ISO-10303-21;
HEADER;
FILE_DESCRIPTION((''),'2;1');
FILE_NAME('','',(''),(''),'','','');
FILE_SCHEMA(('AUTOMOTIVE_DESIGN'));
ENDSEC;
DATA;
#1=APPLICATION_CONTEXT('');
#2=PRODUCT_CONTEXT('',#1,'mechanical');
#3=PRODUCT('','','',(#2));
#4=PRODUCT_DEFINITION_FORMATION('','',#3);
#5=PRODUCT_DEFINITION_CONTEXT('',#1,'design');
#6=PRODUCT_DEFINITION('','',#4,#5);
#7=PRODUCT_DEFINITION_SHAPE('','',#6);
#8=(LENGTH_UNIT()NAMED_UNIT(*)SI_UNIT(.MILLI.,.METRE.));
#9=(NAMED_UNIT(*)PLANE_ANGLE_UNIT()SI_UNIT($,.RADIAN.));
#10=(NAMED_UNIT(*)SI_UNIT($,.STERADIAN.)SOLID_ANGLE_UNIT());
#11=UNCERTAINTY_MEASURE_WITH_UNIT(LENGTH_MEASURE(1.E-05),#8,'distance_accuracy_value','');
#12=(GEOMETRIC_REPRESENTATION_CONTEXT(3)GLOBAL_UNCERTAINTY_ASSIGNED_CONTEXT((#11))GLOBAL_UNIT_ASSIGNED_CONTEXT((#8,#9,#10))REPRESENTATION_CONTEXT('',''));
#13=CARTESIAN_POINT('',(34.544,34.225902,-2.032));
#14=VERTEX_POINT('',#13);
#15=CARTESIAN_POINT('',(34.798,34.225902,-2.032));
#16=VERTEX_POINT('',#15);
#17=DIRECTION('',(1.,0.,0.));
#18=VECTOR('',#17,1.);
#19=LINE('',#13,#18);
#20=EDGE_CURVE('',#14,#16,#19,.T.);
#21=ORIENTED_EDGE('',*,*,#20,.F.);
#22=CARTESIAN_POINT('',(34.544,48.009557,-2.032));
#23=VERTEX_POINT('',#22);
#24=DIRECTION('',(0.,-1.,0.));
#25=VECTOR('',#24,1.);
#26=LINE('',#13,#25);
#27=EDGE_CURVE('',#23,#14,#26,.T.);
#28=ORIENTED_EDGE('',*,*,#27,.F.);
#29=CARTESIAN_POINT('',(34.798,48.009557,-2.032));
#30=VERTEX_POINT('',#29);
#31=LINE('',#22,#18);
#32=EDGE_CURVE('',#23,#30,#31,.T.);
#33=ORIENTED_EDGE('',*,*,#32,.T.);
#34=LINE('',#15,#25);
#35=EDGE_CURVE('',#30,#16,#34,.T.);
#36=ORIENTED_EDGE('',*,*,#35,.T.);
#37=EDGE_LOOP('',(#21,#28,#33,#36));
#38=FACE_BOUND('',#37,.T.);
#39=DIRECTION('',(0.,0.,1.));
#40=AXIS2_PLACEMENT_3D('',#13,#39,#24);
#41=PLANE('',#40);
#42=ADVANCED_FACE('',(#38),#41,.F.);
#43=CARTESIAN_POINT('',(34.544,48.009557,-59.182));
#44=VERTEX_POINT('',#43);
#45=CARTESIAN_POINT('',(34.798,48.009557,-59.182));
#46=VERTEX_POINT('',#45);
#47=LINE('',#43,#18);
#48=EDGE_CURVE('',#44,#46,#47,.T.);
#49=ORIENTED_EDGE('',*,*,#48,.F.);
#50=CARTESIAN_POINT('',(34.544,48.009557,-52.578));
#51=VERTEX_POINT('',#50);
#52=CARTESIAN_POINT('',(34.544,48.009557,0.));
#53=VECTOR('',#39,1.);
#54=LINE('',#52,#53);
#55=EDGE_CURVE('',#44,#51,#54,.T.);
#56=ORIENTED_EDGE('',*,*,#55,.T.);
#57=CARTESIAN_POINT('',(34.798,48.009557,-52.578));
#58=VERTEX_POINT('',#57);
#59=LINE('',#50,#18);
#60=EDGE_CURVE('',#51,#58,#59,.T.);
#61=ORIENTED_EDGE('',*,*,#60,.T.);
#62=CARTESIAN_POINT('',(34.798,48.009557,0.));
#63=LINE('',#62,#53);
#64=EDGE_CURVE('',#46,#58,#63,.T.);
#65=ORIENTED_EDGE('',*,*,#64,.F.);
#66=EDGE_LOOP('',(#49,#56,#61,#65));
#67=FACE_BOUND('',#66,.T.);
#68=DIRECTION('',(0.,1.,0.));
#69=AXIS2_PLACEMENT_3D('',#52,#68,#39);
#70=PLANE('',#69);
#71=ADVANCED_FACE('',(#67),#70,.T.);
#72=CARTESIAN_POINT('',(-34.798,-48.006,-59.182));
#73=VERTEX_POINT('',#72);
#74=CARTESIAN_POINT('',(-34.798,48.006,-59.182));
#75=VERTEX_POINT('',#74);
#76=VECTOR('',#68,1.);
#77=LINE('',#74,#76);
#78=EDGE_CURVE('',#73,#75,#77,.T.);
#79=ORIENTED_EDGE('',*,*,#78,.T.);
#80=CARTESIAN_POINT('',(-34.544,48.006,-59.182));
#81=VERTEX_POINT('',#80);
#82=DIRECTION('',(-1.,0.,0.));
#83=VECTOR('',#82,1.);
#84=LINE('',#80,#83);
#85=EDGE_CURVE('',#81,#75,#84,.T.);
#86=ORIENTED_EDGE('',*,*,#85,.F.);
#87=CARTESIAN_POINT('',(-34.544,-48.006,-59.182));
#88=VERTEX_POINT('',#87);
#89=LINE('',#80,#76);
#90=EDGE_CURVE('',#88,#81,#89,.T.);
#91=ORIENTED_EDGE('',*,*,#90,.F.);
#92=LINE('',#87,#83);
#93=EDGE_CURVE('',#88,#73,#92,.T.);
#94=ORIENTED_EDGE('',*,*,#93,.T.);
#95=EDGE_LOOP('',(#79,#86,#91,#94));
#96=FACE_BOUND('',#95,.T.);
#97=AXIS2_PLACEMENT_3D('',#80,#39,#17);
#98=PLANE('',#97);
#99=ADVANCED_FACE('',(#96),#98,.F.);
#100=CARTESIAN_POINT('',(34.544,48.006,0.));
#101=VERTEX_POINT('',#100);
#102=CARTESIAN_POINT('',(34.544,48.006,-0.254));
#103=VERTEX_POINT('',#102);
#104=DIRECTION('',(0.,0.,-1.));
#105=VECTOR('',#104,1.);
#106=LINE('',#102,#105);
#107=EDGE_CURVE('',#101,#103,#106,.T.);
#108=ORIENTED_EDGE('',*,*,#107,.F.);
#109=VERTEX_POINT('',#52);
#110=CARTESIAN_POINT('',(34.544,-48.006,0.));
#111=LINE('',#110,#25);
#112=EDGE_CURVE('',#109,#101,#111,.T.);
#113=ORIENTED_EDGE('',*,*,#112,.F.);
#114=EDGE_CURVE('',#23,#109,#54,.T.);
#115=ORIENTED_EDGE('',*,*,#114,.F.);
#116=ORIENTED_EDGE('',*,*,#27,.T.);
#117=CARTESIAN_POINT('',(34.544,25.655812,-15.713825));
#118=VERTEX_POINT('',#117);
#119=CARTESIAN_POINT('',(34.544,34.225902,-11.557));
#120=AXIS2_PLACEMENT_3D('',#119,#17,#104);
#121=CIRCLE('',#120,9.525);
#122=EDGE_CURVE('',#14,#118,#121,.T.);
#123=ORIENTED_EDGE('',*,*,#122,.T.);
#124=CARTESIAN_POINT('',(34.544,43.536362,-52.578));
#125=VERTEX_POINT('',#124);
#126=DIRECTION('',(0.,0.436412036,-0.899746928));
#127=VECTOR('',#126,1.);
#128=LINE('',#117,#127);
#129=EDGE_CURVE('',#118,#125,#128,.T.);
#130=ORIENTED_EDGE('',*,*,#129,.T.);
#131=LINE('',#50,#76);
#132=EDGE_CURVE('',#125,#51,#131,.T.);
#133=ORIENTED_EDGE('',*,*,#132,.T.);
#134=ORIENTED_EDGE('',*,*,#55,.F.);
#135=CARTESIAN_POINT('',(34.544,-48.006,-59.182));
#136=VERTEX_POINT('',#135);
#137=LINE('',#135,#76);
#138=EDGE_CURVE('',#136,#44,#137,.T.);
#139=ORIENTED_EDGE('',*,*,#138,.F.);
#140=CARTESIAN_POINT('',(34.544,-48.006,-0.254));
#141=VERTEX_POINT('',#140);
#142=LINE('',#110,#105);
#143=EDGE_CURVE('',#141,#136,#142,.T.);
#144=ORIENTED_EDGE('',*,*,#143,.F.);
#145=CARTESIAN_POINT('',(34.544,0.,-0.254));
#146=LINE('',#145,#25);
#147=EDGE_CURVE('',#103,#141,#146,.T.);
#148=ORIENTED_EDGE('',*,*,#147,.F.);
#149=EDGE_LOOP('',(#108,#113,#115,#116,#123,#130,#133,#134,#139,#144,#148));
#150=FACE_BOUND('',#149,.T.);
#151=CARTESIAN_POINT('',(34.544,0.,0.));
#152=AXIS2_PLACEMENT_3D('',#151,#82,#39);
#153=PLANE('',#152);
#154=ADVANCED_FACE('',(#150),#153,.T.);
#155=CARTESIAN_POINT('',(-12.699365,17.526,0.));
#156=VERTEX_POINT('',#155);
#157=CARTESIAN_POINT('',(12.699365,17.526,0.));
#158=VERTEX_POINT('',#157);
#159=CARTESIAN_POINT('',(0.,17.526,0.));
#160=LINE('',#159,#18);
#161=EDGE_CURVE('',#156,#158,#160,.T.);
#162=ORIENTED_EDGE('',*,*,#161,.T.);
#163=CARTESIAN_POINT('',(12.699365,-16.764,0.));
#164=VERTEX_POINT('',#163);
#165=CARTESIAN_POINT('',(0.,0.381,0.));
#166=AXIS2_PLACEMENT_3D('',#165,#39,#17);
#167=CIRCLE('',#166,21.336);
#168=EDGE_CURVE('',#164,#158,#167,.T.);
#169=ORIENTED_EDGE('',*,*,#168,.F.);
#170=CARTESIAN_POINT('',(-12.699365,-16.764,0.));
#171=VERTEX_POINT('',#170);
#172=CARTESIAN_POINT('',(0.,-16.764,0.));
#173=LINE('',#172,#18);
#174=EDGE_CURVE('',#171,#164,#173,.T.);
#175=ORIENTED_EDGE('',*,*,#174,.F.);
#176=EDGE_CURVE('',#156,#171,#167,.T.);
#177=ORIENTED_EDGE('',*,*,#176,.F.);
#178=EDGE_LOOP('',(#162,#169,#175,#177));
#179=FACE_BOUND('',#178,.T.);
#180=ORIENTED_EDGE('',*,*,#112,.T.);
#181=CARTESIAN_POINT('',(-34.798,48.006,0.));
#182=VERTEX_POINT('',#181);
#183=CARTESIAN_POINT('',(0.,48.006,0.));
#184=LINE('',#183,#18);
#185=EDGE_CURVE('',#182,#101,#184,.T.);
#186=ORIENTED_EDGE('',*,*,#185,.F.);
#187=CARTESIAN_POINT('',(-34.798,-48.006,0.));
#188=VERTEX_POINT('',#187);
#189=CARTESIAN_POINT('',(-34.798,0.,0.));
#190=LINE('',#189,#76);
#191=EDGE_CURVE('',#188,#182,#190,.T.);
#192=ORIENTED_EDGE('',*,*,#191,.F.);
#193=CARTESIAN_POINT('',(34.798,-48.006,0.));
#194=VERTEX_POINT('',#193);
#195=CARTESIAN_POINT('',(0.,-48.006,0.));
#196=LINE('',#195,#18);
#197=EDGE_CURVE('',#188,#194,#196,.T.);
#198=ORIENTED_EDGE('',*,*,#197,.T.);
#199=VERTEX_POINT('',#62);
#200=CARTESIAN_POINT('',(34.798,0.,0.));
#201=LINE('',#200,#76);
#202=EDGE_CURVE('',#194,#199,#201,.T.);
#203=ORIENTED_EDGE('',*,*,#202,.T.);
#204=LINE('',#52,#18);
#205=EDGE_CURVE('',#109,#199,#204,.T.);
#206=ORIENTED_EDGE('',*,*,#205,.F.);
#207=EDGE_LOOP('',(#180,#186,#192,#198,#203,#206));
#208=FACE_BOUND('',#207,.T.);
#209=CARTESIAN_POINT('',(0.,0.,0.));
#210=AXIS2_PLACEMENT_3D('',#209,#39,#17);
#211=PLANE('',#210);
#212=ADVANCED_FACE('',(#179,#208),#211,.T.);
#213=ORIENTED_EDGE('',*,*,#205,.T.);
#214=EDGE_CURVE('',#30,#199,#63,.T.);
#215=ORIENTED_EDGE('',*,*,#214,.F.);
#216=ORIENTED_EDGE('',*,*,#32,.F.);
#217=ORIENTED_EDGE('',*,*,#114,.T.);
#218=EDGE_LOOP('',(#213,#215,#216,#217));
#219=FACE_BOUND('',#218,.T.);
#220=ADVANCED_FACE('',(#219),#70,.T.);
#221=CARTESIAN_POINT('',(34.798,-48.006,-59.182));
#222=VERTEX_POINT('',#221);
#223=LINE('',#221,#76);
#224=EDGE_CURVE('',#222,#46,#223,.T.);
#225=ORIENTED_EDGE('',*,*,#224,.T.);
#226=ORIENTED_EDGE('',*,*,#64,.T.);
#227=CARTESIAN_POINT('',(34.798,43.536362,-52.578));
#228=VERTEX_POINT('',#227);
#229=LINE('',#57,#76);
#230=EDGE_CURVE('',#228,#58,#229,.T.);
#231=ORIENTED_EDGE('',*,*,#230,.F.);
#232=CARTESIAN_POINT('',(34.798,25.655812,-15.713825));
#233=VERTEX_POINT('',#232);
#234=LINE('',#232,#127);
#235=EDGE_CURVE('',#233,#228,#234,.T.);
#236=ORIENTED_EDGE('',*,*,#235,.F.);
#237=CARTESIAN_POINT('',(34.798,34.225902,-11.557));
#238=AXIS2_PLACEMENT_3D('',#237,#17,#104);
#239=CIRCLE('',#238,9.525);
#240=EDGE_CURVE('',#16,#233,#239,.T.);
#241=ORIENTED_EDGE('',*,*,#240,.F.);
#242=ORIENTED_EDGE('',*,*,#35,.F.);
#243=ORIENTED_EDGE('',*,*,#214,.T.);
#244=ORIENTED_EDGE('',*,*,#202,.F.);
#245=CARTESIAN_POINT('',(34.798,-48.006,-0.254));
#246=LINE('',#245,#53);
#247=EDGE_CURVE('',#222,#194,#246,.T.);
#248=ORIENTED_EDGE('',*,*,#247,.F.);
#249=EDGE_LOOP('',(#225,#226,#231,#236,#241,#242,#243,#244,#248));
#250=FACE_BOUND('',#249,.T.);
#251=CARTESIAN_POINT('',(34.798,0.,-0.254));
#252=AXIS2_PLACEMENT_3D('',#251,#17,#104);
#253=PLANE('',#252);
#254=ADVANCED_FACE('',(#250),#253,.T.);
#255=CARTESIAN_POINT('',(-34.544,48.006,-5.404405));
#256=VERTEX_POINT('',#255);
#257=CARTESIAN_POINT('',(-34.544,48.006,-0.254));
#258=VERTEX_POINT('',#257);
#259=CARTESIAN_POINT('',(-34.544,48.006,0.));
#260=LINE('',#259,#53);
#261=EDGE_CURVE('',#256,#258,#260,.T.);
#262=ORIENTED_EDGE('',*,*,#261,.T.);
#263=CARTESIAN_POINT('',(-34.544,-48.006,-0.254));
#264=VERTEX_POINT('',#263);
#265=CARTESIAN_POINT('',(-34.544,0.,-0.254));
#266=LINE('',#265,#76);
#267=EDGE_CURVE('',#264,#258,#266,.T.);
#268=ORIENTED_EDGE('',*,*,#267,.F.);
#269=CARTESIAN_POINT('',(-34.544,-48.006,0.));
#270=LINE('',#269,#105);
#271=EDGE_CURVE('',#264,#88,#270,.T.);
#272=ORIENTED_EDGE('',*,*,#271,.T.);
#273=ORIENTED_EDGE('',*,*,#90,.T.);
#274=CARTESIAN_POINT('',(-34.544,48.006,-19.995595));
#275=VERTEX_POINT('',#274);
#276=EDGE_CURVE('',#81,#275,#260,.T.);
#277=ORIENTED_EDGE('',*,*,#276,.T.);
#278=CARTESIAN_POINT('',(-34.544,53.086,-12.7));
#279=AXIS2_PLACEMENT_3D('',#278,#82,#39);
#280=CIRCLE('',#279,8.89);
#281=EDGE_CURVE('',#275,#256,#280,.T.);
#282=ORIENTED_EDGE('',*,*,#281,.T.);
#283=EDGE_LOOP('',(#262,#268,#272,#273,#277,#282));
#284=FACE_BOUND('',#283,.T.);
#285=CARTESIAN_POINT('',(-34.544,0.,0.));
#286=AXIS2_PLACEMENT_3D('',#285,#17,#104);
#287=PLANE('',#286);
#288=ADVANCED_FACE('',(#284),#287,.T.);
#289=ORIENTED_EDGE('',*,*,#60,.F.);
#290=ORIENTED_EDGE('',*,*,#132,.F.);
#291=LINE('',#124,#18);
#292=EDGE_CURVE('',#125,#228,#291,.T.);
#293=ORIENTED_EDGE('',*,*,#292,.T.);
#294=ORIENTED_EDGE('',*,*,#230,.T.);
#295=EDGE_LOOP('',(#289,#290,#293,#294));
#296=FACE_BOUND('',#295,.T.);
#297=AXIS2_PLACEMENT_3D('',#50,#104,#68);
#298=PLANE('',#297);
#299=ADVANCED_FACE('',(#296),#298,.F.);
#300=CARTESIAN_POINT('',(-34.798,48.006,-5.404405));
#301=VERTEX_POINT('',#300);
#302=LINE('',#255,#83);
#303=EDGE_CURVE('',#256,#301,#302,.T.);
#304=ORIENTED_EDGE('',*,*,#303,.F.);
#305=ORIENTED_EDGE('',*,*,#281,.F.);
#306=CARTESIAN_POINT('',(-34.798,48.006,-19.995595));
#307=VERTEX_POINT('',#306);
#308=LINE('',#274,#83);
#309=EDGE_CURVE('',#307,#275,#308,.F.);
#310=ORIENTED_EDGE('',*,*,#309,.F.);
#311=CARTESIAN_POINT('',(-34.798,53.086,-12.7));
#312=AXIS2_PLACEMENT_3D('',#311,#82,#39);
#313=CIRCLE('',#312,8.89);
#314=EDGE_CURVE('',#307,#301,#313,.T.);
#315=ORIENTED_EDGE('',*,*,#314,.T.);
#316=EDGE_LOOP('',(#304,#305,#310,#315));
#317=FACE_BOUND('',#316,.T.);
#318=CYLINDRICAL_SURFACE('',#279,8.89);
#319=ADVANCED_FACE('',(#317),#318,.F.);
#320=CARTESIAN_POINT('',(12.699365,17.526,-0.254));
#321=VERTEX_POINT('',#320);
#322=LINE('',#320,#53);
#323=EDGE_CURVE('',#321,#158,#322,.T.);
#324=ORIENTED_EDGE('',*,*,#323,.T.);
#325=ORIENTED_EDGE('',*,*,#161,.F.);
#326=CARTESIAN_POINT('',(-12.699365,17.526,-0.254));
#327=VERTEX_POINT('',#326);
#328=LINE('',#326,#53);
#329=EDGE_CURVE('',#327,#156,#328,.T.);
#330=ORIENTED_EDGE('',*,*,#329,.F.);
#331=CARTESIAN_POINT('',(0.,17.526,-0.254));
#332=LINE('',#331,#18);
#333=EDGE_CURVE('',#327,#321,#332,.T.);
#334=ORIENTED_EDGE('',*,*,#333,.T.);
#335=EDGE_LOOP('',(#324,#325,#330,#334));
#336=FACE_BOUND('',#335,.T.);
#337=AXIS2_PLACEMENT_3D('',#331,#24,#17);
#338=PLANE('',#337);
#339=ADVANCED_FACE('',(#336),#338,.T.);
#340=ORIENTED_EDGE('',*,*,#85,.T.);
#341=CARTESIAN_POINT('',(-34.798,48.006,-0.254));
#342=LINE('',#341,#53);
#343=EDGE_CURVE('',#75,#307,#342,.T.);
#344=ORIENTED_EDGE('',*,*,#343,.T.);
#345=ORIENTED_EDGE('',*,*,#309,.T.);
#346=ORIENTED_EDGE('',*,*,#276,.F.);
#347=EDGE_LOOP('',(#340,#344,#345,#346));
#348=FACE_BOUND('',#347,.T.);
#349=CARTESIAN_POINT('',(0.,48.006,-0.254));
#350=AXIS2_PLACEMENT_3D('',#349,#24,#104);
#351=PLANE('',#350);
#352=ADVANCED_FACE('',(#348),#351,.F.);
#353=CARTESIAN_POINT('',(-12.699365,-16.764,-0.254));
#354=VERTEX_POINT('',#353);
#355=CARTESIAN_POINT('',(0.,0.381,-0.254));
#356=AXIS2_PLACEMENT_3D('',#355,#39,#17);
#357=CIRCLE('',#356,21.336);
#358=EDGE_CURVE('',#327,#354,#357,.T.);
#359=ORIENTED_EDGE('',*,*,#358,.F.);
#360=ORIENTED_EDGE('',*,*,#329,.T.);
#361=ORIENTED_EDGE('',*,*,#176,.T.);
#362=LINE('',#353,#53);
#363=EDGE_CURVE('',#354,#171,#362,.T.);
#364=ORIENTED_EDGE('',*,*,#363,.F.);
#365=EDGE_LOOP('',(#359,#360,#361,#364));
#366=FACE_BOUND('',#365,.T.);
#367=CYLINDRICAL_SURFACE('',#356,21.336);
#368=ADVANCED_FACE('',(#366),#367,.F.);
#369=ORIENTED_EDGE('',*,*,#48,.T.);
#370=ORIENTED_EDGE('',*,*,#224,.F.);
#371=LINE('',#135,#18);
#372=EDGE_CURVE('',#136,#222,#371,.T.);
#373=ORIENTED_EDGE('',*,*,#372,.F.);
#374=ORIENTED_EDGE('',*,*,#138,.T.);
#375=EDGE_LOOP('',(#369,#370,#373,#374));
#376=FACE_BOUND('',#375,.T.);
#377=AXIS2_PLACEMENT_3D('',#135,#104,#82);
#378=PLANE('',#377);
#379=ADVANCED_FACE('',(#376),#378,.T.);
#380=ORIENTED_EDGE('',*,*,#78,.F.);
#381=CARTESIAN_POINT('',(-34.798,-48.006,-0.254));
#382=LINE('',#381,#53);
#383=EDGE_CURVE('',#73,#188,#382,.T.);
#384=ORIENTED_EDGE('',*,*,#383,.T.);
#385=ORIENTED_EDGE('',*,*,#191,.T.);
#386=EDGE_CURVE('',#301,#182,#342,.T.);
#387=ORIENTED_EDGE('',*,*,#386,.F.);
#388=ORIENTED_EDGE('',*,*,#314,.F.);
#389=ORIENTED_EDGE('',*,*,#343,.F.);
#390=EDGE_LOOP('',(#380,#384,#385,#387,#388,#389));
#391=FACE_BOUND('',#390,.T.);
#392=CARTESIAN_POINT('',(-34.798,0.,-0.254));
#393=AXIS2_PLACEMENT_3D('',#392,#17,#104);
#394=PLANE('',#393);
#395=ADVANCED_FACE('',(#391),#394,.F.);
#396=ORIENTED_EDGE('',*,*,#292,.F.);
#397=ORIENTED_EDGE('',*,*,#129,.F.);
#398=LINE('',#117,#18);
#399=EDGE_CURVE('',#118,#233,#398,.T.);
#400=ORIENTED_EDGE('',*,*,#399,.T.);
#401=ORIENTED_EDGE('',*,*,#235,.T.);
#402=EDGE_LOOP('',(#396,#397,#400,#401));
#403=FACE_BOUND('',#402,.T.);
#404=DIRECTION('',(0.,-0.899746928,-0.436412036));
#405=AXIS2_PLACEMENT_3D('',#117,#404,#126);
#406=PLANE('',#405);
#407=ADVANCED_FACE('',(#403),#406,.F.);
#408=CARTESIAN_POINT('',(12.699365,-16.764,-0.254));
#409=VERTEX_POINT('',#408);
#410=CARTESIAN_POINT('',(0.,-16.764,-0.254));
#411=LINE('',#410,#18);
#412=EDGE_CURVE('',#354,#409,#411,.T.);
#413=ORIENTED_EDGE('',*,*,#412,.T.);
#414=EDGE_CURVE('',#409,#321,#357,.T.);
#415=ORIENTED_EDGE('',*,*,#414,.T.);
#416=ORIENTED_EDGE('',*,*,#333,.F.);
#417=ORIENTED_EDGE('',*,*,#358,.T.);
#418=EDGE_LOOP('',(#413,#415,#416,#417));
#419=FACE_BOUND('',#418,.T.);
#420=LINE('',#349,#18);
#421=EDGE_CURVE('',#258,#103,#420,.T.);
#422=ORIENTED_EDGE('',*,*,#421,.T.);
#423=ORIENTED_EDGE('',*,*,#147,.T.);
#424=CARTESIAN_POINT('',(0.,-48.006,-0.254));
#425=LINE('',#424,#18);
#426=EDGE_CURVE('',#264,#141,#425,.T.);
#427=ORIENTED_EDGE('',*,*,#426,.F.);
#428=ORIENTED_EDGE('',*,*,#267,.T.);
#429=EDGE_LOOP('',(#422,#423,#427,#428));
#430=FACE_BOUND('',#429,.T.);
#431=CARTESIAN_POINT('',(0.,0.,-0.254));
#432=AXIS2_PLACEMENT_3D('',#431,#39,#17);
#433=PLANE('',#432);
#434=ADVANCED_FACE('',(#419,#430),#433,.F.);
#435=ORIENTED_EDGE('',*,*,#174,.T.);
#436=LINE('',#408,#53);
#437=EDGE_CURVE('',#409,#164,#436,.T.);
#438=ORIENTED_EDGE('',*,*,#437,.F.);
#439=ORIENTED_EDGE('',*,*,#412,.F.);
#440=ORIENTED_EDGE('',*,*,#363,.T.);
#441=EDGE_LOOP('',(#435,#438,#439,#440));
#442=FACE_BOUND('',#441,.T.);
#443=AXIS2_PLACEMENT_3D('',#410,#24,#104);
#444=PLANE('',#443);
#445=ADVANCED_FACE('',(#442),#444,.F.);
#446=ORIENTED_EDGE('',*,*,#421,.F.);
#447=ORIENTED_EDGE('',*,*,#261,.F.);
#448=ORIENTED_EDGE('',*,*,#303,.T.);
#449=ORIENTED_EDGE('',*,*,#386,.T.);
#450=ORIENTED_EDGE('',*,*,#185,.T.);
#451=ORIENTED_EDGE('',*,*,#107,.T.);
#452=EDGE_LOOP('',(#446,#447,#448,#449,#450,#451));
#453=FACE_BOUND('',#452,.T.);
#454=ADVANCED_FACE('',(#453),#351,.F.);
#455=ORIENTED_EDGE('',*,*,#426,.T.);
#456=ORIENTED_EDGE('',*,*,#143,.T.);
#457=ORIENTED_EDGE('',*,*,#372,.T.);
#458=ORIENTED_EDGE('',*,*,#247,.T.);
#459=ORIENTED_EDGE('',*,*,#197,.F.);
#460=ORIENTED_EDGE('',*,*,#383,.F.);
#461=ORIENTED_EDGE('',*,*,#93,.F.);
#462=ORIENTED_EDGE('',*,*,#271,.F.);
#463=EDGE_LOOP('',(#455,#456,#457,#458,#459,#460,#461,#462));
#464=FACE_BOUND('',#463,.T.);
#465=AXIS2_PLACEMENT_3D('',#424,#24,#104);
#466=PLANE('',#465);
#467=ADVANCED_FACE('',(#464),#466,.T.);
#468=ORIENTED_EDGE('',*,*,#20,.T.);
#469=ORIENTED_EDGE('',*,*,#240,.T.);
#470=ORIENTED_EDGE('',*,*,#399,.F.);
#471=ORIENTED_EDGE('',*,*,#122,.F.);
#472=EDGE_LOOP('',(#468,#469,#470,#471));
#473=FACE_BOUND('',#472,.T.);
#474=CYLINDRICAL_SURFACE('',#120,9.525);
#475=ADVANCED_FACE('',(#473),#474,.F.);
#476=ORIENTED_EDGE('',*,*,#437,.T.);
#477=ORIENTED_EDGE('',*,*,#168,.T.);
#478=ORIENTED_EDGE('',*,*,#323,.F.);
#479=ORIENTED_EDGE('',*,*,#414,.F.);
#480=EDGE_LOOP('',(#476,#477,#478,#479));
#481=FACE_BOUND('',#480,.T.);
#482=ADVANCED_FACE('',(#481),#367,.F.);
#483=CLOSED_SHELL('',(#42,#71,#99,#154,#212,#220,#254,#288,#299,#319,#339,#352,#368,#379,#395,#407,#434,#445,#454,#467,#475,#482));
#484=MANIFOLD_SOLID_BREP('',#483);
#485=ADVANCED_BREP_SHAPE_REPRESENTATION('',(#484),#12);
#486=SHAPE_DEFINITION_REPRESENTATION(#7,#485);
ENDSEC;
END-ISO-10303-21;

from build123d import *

# Parameters (mm, degrees)
SKETCH1_W            = 69.596
SKETCH1_H            = 96.012
BOSS_EXTRUDE1_DEPTH  = 0.254
SKETCH3_W            = 69.596
SKETCH3_H            = 0.508
BOSS_EXTRUDE2_DEPTH  = 0.254
BOSS_EXTRUDE6_DEPTH  = 0.254
FILLET6_R            = 0.254
SKETCH8_W            = 59.182
SKETCH8_H            = 96.015557392
BOSS_EXTRUDE8_DEPTH  = 0.254
CUT_EXTRUDE1_DEPTH   = 0.254
SKETCH12_W           = 59.182
SKETCH12_H           = 96.012
BOSS_EXTRUDE10_DEPTH = 0.254
SKETCH13_R           = 8.89
CUT_EXTRUDE3_DEPTH   = 0.254
SKETCH24_W           = 13.836349518
SKETCH24_H           = 43.884642402
CUT_EXTRUDE5_DEPTH   = 104.203827287


with BuildPart() as part:
    # Sketch1 → Boss-Extrude1 (new body)
    with BuildSketch(Plane.XY):
        Rectangle(SKETCH1_W, SKETCH1_H)
        with BuildLine():
            Line((12.699364984, -16.764), (-12.699364984, -16.764))
            ThreePointArc((-12.699364984, -16.764), (-21.336, 0.381), (-12.699364984, 17.526))
            Line((-12.699364984, 17.526), (12.699364984, 17.526))
            ThreePointArc((12.699364984, 17.526), (21.336, 0.381), (12.699364984, -16.764))
        make_face(mode=Mode.SUBTRACT)
    extrude(amount=-BOSS_EXTRUDE1_DEPTH)

    # Sketch3 → Boss-Extrude2 (add)
    with BuildSketch(Plane.XY):
        with Locations((0, -17.272)):
            Rectangle(SKETCH3_W, SKETCH3_H)
    extrude(amount=BOSS_EXTRUDE2_DEPTH)

    # Sketch6 → Boss-Extrude6 (add)
    with BuildSketch(Plane.XY):
        with BuildLine():
            Line((14.986, -48.006), (15.24, -48.006))
            ThreePointArc((15.24, -48.006), (0, -32.766), (-15.24, -48.006))
            Line((-15.24, -48.006), (-14.986, -48.006))
            ThreePointArc((-14.986, -48.006), (0, -33.02), (14.986, -48.006))
        make_face()
    extrude(amount=BOSS_EXTRUDE6_DEPTH)

    # Fillet6
    # the kernel refuses this fillet: 0.254 mm, written as the material it takes off along each edge
    with BuildSketch(Plane(origin=(0, -48.006, 0.254), x_dir=(-0.9990995148781596, -0.04242828502574812, 0), z_dir=(0.04242828502574812, -0.9990995148781596, 0))) as fillet6_piece_1:
        with BuildLine():
            CenterArc((14.986 + FILLET6_R, FILLET6_R), FILLET6_R, 180, 90)
            Line((14.986 + FILLET6_R, 0), (14.986, 0))
            Line((14.986, 0), (14.986, FILLET6_R))
        make_face()
    revolve(axis=Axis((0, -48.006, 0.254), (0, 0, -1)), revolution_arc=184.863383217, mode=Mode.SUBTRACT)
    with BuildSketch(Plane(origin=(0, -48.006, 0.254), x_dir=(0.9991292765937022, -0.0417215610128061, 0), z_dir=(-0.0417215610128061, -0.9991292765937022, 0))) as fillet6_piece_2:
        with BuildLine():
            CenterArc((15.24 - FILLET6_R, -FILLET6_R), FILLET6_R, 0, 90)
            Line((15.24 - FILLET6_R, 0), (15.24, 0))
            Line((15.24, 0), (15.24, -FILLET6_R))
        make_face()
    revolve(axis=Axis((0, -48.006, 0.254), (0, 0, 1)), revolution_arc=184.78232683, mode=Mode.SUBTRACT)

    # Sketch8 → Boss-Extrude8 (add)
    with BuildSketch(Plane(origin=(34.798, 0, 0), x_dir=(0, 0, -1), z_dir=(1, 0, 0))):
        with Locations((29.591, 0.001778696)):
            Rectangle(SKETCH8_W, SKETCH8_H)
    extrude(amount=-BOSS_EXTRUDE8_DEPTH)

    # Sketch9 → Cut-Extrude1 (cut)
    with BuildSketch(Plane(origin=(34.798, 0, 0), x_dir=(0, 0, -1), z_dir=(1, 0, 0))):
        with BuildLine():
            Line((2.032, 34.225901784), (2.032, 48.009557392))
            Line((2.032, 48.009557392), (52.578, 48.009557392))
            Line((52.578, 48.009557392), (52.578, 43.536362147))
            Line((52.578, 43.536362147), (15.713824639, 25.655812291))
            ThreePointArc((15.713824639, 25.655812291), (6.500723192, 26.153746568), (2.032, 34.225901784))
        make_face()
    extrude(amount=-CUT_EXTRUDE1_DEPTH, mode=Mode.SUBTRACT)

    # Sketch12 → Boss-Extrude10 (add)
    with BuildSketch(Plane(origin=(-34.798, 0, 0), x_dir=(0, 0, -1), z_dir=(1, 0, 0))):
        with Locations((29.591, 0)):
            Rectangle(SKETCH12_W, SKETCH12_H)
    extrude(amount=BOSS_EXTRUDE10_DEPTH)

    # Sketch13 → Cut-Extrude3 (cut)
    with BuildSketch(Plane.ZY.offset(34.798)):
        with Locations((-12.7, 53.086)):
            Circle(SKETCH13_R)
    extrude(amount=-CUT_EXTRUDE3_DEPTH, mode=Mode.SUBTRACT)

    # Sketch24 → Cut-Extrude5 (cut, through all)
    with BuildSketch(Plane(origin=(34.798, 0, 0), x_dir=(0, 0, -1), z_dir=(1, 0, 0))):
        with Locations((-6.918174759, -26.063678799)):
            Rectangle(SKETCH24_W, SKETCH24_H)
    extrude(amount=-CUT_EXTRUDE5_DEPTH, mode=Mode.SUBTRACT)


solid = part.part
